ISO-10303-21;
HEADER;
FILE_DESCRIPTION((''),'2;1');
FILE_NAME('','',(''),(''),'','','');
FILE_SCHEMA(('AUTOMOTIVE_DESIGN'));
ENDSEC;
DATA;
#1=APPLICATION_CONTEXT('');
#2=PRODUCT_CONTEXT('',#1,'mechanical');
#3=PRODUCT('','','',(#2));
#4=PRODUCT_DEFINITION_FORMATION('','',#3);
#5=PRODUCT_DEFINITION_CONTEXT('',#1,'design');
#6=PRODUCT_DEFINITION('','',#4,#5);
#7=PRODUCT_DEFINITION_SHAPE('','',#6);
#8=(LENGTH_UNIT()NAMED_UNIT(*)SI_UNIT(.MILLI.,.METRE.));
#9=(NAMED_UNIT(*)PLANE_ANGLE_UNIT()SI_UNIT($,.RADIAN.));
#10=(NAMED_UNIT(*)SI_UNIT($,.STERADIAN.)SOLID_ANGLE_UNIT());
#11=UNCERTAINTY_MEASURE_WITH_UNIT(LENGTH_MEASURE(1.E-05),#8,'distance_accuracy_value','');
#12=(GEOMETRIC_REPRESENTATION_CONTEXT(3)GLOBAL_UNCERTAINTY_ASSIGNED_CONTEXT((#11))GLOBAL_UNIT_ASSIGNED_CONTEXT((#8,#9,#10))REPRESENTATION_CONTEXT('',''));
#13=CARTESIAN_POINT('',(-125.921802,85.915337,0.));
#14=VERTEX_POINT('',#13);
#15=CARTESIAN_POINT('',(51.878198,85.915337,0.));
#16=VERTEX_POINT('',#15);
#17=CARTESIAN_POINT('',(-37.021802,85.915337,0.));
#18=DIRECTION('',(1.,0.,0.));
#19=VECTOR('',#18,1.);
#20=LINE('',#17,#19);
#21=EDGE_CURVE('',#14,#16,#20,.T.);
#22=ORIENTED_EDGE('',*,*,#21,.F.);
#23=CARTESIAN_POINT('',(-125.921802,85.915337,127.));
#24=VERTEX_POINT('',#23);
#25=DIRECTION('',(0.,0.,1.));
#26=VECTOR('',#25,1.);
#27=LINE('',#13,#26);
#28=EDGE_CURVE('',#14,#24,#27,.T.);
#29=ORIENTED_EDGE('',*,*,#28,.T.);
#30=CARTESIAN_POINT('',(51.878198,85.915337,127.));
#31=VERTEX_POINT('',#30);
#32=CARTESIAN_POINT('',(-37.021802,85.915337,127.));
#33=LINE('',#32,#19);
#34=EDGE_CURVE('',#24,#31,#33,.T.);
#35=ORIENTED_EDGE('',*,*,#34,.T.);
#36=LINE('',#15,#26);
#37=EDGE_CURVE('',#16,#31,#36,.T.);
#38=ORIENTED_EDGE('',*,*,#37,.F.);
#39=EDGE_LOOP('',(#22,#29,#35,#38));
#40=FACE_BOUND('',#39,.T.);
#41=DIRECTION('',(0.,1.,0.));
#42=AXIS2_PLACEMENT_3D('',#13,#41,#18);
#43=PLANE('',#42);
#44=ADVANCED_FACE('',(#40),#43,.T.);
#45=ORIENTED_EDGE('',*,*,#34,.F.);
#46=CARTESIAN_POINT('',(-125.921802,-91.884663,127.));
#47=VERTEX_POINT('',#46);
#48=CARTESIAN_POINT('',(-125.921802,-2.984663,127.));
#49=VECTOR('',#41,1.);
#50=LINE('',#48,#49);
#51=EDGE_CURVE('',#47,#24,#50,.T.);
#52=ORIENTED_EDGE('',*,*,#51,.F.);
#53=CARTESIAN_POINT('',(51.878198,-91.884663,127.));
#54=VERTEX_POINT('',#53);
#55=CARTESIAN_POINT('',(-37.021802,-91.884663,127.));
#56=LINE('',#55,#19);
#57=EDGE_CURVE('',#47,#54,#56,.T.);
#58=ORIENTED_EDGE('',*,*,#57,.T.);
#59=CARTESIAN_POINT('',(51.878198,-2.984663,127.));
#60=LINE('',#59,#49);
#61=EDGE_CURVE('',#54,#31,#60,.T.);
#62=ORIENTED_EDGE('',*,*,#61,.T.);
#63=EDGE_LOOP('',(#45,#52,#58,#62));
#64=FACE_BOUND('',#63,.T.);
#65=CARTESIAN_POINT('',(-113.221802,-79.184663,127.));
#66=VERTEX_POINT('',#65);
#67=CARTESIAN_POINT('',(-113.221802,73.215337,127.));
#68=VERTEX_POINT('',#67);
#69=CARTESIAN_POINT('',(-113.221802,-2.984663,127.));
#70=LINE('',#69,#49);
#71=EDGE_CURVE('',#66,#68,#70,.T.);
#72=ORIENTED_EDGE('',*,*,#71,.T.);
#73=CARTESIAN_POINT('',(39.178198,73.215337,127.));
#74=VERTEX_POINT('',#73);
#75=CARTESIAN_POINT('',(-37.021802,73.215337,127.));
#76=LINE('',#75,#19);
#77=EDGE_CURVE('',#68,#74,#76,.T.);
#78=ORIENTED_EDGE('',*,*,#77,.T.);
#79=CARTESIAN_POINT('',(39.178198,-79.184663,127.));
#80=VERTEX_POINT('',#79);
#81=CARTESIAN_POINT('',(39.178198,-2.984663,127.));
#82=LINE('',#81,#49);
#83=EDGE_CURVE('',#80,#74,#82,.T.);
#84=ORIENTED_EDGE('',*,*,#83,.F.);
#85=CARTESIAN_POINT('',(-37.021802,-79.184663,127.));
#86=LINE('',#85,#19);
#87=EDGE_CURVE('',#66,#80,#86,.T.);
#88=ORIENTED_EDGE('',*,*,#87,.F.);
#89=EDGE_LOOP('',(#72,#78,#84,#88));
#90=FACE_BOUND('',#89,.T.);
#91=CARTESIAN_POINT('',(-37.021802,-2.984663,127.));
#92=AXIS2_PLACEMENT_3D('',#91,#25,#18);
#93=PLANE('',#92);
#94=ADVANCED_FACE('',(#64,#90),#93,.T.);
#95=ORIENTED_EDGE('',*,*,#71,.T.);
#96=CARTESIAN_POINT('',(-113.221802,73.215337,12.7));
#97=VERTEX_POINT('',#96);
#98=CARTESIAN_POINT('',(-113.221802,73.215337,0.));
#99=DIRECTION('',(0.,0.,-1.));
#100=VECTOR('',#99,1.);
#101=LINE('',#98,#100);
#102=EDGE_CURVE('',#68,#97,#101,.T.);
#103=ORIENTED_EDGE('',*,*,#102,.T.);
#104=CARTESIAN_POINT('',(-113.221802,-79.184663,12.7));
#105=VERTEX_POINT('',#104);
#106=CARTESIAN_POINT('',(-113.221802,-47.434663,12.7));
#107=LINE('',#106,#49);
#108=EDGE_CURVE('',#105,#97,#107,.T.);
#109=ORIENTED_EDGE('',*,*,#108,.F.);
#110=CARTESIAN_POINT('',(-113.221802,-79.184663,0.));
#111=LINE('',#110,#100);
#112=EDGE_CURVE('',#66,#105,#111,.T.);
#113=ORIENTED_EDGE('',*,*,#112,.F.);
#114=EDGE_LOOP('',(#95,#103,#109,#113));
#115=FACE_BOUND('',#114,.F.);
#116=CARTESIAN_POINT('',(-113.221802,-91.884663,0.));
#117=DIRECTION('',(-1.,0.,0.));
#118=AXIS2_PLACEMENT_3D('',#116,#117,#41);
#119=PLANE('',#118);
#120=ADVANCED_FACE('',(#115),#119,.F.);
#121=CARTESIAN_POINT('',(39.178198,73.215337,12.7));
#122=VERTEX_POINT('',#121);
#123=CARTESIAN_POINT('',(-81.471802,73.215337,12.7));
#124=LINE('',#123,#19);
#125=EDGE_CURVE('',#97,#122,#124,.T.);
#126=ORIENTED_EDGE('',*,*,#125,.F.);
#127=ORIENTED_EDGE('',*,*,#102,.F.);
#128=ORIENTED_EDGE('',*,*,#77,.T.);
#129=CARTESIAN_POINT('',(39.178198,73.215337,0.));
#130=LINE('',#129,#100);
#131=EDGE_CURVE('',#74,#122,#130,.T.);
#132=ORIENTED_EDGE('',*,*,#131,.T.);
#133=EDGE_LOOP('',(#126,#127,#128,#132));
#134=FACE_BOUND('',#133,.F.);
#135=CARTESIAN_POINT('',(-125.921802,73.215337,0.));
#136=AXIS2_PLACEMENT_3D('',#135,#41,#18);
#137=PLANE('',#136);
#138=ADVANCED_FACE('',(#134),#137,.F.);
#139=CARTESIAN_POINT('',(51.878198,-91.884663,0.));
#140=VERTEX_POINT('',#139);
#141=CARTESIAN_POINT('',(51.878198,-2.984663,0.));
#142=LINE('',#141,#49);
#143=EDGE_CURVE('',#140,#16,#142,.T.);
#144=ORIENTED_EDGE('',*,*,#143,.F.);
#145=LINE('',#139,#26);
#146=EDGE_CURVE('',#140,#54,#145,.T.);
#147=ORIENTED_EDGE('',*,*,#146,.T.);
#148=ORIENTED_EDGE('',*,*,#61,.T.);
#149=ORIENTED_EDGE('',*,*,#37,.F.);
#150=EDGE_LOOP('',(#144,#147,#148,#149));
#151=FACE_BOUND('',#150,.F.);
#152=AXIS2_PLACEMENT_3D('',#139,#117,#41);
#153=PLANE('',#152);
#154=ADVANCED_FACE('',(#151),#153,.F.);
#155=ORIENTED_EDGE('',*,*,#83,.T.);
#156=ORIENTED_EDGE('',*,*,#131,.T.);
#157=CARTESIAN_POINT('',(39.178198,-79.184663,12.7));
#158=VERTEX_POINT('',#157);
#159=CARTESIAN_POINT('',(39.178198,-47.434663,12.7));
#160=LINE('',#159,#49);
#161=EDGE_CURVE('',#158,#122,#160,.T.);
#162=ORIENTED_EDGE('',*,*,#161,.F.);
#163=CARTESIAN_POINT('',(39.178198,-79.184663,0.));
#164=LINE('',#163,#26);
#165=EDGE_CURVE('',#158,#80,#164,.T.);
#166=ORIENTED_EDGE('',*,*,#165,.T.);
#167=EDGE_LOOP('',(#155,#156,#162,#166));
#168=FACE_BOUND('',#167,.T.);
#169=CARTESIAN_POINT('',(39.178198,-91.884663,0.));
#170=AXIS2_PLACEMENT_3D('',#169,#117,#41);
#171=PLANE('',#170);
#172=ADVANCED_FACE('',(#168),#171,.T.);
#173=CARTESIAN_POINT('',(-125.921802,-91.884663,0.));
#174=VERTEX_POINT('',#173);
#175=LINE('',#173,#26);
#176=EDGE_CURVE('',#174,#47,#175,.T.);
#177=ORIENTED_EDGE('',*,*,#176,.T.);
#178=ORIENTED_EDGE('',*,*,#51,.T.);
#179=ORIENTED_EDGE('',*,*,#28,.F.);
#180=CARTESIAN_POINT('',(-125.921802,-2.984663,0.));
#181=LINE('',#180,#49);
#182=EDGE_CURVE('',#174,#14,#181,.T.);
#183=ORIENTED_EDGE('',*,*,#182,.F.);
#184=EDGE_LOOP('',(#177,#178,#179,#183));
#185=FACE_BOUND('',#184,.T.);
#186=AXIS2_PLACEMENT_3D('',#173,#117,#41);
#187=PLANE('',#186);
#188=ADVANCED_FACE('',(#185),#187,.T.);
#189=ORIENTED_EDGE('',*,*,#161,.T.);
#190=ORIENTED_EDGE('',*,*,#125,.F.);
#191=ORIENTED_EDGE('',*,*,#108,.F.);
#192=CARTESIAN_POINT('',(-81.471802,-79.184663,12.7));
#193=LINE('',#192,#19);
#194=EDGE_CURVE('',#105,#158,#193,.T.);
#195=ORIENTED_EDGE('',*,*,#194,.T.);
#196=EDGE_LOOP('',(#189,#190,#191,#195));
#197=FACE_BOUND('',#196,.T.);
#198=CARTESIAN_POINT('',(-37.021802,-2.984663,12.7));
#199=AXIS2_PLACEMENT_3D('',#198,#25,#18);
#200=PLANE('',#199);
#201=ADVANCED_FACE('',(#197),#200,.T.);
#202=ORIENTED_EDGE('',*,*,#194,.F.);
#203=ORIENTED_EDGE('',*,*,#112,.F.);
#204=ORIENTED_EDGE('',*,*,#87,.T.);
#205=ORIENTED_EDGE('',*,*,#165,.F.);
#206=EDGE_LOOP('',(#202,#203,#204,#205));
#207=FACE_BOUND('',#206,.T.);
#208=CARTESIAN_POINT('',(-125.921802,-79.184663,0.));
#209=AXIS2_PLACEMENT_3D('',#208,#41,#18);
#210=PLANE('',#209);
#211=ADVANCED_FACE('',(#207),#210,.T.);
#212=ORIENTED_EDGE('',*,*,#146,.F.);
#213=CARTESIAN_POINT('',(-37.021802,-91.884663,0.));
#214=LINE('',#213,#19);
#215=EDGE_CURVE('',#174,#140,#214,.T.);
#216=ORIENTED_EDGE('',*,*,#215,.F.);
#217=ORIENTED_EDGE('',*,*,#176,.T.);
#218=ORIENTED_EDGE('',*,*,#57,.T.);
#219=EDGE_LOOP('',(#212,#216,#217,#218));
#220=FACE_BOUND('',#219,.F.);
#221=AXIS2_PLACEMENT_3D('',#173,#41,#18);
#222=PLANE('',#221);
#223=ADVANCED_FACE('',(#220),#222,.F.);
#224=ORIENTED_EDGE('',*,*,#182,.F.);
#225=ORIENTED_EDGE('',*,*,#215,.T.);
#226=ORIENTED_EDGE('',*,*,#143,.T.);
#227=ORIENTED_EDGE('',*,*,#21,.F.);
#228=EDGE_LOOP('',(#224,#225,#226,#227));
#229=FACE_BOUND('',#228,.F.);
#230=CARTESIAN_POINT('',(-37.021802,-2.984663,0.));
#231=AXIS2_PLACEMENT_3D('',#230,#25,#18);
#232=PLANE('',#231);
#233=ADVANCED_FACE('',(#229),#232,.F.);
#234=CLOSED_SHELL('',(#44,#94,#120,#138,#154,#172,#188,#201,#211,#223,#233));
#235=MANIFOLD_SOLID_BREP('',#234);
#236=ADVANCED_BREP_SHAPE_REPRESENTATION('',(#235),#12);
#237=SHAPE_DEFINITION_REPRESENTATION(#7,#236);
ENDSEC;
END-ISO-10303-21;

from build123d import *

# Parameters (mm, degrees)
F1_W     = 177.8
F1_H     = 177.8
F3_DEPTH = 127
F4_T     = -12.7


# Not quite as in the source:
# - a variable given as a bare number and used for a length is read in inches; the dataset says mm whatever the document's units were


with BuildPart() as f3:
    # F1 (on Top) → F3 (new body)
    with BuildSketch(Plane.XY):
        with Locations((-37.0218022674, -2.984662973)):
            Rectangle(F1_W, F1_H)
    extrude(amount=F3_DEPTH)

    # F4
    f4_openings = [f3.faces().sort_by_distance(p)[0] for p in [
        (-37.021802, -2.984663, 127),
    ]]
    offset(amount=F4_T, openings=f4_openings)


solid = f3.part
